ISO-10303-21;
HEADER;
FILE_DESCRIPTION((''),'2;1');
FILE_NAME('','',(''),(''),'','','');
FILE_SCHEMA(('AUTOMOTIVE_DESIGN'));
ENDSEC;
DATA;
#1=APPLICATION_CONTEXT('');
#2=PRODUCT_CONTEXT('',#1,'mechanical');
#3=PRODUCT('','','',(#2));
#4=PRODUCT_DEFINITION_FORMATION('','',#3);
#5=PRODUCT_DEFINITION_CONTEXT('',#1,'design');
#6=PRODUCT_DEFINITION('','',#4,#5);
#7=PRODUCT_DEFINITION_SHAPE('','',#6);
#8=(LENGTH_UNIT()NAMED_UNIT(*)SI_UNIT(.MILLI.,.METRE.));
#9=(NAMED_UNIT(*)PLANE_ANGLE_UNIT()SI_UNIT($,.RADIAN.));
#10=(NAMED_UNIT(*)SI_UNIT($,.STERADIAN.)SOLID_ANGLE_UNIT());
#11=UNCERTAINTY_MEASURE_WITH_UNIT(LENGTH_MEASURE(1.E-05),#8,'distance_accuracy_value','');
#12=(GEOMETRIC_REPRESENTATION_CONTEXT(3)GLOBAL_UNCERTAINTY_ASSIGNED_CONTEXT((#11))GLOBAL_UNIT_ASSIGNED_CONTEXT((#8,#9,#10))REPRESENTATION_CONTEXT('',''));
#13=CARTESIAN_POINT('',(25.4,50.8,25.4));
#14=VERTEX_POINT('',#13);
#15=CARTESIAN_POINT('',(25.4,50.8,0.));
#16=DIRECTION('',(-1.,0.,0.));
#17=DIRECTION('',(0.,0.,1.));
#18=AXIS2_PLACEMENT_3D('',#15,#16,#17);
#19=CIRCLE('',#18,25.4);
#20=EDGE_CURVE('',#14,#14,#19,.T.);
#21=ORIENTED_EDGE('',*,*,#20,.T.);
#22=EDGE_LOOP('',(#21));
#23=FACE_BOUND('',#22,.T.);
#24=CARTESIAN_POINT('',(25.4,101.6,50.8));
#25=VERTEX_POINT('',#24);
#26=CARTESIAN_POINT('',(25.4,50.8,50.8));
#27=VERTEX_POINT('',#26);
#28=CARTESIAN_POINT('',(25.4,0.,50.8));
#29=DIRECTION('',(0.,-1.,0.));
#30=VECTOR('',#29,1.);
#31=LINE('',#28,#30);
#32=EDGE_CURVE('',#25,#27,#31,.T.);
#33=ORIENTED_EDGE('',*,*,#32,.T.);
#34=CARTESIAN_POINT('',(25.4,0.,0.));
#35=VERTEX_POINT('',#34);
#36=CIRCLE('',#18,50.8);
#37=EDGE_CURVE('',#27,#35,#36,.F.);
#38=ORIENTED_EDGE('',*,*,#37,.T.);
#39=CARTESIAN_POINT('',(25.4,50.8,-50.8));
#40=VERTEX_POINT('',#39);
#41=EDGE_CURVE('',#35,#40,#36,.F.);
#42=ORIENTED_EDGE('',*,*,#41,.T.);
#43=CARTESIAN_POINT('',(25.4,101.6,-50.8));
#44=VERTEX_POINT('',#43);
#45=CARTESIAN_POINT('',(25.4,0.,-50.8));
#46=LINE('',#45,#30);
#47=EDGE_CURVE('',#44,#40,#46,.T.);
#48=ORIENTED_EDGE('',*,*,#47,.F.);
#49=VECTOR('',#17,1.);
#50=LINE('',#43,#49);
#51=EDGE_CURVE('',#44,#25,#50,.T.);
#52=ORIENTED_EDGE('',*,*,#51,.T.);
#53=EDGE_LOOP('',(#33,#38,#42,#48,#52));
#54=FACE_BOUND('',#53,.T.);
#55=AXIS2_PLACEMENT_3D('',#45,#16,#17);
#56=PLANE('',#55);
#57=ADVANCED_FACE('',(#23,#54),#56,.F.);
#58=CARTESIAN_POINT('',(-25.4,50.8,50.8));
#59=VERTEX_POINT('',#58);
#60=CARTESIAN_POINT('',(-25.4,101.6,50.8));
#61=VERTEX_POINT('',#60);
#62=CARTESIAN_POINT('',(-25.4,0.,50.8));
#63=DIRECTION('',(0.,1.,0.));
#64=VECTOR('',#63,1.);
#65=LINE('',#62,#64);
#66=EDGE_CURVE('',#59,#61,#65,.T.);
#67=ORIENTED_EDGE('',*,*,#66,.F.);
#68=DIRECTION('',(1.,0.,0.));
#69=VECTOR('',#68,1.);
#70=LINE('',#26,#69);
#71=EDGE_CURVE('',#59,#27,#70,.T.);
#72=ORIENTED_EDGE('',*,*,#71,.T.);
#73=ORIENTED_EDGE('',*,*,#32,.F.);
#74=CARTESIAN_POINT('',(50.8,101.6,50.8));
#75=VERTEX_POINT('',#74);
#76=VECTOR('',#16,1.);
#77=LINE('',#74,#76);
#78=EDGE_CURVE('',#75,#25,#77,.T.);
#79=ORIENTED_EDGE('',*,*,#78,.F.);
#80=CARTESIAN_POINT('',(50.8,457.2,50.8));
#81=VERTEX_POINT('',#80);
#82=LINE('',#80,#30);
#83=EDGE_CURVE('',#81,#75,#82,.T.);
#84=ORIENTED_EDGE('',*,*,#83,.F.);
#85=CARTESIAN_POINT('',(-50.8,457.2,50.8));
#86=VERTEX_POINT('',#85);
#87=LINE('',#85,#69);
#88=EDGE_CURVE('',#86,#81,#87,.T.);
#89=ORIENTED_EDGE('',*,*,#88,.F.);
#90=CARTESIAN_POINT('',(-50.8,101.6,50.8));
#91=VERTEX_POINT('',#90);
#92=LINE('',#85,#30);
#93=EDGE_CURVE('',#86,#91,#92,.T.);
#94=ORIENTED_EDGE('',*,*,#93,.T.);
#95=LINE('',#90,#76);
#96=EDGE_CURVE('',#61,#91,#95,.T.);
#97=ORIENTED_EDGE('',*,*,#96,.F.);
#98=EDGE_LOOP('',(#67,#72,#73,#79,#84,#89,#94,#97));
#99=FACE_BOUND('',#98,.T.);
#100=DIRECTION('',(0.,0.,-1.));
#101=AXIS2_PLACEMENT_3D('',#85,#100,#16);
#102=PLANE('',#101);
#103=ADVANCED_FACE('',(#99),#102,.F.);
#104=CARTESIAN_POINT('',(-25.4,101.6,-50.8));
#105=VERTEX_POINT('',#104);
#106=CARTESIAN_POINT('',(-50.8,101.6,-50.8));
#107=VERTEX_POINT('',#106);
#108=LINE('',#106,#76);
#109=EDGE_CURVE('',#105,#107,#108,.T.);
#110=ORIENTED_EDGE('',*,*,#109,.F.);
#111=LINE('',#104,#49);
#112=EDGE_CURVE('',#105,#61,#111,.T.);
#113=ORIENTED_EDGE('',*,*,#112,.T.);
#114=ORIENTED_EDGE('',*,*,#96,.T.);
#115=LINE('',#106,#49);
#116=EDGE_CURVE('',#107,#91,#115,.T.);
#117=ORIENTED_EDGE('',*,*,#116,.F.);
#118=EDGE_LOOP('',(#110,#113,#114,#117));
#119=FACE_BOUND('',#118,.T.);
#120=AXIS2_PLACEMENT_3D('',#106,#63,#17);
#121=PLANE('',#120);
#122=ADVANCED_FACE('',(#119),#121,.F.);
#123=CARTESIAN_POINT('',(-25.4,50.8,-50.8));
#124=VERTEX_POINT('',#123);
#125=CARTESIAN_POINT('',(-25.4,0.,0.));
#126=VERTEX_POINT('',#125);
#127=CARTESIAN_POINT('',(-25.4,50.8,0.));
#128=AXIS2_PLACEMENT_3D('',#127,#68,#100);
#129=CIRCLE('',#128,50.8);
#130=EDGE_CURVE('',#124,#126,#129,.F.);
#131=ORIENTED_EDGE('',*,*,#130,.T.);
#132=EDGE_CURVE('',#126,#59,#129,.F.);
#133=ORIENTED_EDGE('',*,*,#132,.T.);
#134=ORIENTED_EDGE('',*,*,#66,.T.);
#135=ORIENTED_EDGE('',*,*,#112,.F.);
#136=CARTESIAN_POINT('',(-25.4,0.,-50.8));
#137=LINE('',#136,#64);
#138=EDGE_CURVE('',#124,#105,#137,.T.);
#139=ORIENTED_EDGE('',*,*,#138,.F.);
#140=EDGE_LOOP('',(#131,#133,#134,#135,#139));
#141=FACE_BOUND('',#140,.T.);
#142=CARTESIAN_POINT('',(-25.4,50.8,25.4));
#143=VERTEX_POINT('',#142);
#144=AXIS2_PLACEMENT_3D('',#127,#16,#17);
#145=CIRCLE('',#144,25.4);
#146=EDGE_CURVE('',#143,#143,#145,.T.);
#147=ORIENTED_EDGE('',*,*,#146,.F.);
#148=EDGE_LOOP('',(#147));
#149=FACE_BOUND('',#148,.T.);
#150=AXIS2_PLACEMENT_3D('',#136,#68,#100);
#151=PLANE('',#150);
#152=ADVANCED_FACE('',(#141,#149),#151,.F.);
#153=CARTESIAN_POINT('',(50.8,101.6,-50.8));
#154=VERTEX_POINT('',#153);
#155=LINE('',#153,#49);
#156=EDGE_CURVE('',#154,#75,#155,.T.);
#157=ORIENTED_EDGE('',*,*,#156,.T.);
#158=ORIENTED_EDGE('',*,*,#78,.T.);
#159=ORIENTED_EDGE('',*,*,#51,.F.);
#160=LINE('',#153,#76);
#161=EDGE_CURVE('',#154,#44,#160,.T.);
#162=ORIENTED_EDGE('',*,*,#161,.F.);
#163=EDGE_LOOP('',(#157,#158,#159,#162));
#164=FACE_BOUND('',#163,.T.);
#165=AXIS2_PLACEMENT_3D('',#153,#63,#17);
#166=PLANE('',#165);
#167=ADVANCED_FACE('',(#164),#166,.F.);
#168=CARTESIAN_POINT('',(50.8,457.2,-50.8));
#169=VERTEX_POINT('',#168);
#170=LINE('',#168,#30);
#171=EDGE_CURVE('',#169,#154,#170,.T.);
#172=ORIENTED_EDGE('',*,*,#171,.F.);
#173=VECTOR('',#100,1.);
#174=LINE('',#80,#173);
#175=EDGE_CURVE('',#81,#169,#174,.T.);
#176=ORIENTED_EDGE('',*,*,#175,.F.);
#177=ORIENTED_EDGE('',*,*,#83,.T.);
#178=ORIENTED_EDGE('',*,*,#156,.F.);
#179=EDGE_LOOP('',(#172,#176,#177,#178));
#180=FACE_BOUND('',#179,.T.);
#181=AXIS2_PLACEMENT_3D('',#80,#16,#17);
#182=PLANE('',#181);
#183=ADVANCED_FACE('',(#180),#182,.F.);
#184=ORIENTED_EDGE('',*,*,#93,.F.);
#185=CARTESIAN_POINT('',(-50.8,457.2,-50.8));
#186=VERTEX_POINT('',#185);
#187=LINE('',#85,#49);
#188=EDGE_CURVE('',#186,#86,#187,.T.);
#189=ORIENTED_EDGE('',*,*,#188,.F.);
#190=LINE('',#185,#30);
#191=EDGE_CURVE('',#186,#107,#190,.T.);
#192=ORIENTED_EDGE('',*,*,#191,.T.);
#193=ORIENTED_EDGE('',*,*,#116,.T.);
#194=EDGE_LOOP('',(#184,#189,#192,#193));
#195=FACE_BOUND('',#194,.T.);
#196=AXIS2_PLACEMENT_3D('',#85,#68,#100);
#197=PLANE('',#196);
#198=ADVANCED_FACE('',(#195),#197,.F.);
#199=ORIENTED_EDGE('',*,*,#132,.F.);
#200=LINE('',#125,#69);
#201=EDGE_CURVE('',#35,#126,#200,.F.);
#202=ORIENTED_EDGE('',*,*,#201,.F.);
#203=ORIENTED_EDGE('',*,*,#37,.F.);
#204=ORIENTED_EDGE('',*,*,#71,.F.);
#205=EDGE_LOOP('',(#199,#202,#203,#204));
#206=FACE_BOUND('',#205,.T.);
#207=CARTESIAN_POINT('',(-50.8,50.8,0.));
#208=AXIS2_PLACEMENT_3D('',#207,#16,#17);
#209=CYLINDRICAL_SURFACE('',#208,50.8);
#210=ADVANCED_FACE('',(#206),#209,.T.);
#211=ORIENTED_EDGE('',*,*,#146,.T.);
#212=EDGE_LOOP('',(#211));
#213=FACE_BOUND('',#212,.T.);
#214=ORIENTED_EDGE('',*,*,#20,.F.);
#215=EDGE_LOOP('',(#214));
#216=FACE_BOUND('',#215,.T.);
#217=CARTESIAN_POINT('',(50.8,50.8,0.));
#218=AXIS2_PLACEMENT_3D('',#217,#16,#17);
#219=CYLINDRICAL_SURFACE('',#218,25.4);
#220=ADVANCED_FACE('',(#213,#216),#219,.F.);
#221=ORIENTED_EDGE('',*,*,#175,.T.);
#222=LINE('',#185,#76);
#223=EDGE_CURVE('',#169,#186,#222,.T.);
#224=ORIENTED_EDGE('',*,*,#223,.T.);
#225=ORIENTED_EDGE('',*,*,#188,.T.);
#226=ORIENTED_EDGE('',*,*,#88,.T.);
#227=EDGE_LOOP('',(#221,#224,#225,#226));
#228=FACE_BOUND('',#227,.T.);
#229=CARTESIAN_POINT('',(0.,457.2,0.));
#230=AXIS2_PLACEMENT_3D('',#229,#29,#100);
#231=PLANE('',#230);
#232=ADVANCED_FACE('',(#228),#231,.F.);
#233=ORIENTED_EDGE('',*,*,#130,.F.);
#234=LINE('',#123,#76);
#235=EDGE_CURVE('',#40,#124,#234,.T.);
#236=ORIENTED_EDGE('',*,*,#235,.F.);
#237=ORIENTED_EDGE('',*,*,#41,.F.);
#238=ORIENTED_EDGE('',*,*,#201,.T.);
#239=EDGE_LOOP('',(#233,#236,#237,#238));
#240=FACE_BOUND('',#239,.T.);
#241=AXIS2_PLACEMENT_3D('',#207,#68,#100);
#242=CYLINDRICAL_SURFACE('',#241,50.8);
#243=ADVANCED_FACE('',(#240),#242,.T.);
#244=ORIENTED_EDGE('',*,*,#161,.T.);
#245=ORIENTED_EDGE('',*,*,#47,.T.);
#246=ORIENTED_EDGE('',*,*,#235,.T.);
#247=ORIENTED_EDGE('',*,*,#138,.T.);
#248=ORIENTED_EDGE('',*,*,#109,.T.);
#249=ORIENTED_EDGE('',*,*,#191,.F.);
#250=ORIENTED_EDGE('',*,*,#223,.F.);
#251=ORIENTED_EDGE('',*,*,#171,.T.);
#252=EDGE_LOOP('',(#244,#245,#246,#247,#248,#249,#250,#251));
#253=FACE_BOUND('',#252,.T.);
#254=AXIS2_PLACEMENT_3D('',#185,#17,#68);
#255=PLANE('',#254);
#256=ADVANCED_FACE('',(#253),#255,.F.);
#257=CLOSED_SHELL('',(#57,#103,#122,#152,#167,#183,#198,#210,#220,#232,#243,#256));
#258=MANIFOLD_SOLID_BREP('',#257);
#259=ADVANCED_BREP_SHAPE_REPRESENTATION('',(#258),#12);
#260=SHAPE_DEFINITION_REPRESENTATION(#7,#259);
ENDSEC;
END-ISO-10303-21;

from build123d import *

# Parameters (mm, degrees)
SKETCH1_W           = 101.6
SKETCH1_H           = 101.6
BOSS_EXTRUDE1_DEPTH = 457.2
SKETCH2_W           = 25.4
SKETCH2_H           = 101.6
CUT_EXTRUDE1_DEPTH  = 472.099819571
FILLET1_R           = 50.8
SKETCH3_R           = 25.4
CUT_EXTRUDE2_DEPTH  = 467.282017667


with BuildPart() as part:
    # Sketch1 → Boss-Extrude1 (new body)
    with BuildSketch(Plane(origin=(0, 0, 0), x_dir=(1, 0, 0), z_dir=(0, 1, 0))):
        Rectangle(SKETCH1_W, SKETCH1_H)
    extrude(amount=BOSS_EXTRUDE1_DEPTH)

    # Sketch2 → Cut-Extrude1 (cut, through all)
    with BuildSketch(Plane.XY.offset(50.8)):
        with Locations((-38.1, 50.8)):
            Rectangle(SKETCH2_W, SKETCH2_H)
        with Locations((38.1, 50.8)):
            Rectangle(SKETCH2_W, SKETCH2_H)
    extrude(amount=-CUT_EXTRUDE1_DEPTH, mode=Mode.SUBTRACT)

    # Fillet1
    fillet1_edges = [part.edges().sort_by_distance(p)[0] for p in [
        (0, 0, -50.8),
        (0, 0, 50.8),
    ]]
    fillet(fillet1_edges, radius=FILLET1_R - 0.0001)  # a hair under: the kernel refuses the full size

    # Sketch3 → Cut-Extrude2 (cut, through all)
    with BuildSketch(Plane.ZY.offset(25.4)):
        with Locations((0, 50.8)):
            Circle(SKETCH3_R)
    extrude(amount=-CUT_EXTRUDE2_DEPTH, mode=Mode.SUBTRACT)


solid = part.part
